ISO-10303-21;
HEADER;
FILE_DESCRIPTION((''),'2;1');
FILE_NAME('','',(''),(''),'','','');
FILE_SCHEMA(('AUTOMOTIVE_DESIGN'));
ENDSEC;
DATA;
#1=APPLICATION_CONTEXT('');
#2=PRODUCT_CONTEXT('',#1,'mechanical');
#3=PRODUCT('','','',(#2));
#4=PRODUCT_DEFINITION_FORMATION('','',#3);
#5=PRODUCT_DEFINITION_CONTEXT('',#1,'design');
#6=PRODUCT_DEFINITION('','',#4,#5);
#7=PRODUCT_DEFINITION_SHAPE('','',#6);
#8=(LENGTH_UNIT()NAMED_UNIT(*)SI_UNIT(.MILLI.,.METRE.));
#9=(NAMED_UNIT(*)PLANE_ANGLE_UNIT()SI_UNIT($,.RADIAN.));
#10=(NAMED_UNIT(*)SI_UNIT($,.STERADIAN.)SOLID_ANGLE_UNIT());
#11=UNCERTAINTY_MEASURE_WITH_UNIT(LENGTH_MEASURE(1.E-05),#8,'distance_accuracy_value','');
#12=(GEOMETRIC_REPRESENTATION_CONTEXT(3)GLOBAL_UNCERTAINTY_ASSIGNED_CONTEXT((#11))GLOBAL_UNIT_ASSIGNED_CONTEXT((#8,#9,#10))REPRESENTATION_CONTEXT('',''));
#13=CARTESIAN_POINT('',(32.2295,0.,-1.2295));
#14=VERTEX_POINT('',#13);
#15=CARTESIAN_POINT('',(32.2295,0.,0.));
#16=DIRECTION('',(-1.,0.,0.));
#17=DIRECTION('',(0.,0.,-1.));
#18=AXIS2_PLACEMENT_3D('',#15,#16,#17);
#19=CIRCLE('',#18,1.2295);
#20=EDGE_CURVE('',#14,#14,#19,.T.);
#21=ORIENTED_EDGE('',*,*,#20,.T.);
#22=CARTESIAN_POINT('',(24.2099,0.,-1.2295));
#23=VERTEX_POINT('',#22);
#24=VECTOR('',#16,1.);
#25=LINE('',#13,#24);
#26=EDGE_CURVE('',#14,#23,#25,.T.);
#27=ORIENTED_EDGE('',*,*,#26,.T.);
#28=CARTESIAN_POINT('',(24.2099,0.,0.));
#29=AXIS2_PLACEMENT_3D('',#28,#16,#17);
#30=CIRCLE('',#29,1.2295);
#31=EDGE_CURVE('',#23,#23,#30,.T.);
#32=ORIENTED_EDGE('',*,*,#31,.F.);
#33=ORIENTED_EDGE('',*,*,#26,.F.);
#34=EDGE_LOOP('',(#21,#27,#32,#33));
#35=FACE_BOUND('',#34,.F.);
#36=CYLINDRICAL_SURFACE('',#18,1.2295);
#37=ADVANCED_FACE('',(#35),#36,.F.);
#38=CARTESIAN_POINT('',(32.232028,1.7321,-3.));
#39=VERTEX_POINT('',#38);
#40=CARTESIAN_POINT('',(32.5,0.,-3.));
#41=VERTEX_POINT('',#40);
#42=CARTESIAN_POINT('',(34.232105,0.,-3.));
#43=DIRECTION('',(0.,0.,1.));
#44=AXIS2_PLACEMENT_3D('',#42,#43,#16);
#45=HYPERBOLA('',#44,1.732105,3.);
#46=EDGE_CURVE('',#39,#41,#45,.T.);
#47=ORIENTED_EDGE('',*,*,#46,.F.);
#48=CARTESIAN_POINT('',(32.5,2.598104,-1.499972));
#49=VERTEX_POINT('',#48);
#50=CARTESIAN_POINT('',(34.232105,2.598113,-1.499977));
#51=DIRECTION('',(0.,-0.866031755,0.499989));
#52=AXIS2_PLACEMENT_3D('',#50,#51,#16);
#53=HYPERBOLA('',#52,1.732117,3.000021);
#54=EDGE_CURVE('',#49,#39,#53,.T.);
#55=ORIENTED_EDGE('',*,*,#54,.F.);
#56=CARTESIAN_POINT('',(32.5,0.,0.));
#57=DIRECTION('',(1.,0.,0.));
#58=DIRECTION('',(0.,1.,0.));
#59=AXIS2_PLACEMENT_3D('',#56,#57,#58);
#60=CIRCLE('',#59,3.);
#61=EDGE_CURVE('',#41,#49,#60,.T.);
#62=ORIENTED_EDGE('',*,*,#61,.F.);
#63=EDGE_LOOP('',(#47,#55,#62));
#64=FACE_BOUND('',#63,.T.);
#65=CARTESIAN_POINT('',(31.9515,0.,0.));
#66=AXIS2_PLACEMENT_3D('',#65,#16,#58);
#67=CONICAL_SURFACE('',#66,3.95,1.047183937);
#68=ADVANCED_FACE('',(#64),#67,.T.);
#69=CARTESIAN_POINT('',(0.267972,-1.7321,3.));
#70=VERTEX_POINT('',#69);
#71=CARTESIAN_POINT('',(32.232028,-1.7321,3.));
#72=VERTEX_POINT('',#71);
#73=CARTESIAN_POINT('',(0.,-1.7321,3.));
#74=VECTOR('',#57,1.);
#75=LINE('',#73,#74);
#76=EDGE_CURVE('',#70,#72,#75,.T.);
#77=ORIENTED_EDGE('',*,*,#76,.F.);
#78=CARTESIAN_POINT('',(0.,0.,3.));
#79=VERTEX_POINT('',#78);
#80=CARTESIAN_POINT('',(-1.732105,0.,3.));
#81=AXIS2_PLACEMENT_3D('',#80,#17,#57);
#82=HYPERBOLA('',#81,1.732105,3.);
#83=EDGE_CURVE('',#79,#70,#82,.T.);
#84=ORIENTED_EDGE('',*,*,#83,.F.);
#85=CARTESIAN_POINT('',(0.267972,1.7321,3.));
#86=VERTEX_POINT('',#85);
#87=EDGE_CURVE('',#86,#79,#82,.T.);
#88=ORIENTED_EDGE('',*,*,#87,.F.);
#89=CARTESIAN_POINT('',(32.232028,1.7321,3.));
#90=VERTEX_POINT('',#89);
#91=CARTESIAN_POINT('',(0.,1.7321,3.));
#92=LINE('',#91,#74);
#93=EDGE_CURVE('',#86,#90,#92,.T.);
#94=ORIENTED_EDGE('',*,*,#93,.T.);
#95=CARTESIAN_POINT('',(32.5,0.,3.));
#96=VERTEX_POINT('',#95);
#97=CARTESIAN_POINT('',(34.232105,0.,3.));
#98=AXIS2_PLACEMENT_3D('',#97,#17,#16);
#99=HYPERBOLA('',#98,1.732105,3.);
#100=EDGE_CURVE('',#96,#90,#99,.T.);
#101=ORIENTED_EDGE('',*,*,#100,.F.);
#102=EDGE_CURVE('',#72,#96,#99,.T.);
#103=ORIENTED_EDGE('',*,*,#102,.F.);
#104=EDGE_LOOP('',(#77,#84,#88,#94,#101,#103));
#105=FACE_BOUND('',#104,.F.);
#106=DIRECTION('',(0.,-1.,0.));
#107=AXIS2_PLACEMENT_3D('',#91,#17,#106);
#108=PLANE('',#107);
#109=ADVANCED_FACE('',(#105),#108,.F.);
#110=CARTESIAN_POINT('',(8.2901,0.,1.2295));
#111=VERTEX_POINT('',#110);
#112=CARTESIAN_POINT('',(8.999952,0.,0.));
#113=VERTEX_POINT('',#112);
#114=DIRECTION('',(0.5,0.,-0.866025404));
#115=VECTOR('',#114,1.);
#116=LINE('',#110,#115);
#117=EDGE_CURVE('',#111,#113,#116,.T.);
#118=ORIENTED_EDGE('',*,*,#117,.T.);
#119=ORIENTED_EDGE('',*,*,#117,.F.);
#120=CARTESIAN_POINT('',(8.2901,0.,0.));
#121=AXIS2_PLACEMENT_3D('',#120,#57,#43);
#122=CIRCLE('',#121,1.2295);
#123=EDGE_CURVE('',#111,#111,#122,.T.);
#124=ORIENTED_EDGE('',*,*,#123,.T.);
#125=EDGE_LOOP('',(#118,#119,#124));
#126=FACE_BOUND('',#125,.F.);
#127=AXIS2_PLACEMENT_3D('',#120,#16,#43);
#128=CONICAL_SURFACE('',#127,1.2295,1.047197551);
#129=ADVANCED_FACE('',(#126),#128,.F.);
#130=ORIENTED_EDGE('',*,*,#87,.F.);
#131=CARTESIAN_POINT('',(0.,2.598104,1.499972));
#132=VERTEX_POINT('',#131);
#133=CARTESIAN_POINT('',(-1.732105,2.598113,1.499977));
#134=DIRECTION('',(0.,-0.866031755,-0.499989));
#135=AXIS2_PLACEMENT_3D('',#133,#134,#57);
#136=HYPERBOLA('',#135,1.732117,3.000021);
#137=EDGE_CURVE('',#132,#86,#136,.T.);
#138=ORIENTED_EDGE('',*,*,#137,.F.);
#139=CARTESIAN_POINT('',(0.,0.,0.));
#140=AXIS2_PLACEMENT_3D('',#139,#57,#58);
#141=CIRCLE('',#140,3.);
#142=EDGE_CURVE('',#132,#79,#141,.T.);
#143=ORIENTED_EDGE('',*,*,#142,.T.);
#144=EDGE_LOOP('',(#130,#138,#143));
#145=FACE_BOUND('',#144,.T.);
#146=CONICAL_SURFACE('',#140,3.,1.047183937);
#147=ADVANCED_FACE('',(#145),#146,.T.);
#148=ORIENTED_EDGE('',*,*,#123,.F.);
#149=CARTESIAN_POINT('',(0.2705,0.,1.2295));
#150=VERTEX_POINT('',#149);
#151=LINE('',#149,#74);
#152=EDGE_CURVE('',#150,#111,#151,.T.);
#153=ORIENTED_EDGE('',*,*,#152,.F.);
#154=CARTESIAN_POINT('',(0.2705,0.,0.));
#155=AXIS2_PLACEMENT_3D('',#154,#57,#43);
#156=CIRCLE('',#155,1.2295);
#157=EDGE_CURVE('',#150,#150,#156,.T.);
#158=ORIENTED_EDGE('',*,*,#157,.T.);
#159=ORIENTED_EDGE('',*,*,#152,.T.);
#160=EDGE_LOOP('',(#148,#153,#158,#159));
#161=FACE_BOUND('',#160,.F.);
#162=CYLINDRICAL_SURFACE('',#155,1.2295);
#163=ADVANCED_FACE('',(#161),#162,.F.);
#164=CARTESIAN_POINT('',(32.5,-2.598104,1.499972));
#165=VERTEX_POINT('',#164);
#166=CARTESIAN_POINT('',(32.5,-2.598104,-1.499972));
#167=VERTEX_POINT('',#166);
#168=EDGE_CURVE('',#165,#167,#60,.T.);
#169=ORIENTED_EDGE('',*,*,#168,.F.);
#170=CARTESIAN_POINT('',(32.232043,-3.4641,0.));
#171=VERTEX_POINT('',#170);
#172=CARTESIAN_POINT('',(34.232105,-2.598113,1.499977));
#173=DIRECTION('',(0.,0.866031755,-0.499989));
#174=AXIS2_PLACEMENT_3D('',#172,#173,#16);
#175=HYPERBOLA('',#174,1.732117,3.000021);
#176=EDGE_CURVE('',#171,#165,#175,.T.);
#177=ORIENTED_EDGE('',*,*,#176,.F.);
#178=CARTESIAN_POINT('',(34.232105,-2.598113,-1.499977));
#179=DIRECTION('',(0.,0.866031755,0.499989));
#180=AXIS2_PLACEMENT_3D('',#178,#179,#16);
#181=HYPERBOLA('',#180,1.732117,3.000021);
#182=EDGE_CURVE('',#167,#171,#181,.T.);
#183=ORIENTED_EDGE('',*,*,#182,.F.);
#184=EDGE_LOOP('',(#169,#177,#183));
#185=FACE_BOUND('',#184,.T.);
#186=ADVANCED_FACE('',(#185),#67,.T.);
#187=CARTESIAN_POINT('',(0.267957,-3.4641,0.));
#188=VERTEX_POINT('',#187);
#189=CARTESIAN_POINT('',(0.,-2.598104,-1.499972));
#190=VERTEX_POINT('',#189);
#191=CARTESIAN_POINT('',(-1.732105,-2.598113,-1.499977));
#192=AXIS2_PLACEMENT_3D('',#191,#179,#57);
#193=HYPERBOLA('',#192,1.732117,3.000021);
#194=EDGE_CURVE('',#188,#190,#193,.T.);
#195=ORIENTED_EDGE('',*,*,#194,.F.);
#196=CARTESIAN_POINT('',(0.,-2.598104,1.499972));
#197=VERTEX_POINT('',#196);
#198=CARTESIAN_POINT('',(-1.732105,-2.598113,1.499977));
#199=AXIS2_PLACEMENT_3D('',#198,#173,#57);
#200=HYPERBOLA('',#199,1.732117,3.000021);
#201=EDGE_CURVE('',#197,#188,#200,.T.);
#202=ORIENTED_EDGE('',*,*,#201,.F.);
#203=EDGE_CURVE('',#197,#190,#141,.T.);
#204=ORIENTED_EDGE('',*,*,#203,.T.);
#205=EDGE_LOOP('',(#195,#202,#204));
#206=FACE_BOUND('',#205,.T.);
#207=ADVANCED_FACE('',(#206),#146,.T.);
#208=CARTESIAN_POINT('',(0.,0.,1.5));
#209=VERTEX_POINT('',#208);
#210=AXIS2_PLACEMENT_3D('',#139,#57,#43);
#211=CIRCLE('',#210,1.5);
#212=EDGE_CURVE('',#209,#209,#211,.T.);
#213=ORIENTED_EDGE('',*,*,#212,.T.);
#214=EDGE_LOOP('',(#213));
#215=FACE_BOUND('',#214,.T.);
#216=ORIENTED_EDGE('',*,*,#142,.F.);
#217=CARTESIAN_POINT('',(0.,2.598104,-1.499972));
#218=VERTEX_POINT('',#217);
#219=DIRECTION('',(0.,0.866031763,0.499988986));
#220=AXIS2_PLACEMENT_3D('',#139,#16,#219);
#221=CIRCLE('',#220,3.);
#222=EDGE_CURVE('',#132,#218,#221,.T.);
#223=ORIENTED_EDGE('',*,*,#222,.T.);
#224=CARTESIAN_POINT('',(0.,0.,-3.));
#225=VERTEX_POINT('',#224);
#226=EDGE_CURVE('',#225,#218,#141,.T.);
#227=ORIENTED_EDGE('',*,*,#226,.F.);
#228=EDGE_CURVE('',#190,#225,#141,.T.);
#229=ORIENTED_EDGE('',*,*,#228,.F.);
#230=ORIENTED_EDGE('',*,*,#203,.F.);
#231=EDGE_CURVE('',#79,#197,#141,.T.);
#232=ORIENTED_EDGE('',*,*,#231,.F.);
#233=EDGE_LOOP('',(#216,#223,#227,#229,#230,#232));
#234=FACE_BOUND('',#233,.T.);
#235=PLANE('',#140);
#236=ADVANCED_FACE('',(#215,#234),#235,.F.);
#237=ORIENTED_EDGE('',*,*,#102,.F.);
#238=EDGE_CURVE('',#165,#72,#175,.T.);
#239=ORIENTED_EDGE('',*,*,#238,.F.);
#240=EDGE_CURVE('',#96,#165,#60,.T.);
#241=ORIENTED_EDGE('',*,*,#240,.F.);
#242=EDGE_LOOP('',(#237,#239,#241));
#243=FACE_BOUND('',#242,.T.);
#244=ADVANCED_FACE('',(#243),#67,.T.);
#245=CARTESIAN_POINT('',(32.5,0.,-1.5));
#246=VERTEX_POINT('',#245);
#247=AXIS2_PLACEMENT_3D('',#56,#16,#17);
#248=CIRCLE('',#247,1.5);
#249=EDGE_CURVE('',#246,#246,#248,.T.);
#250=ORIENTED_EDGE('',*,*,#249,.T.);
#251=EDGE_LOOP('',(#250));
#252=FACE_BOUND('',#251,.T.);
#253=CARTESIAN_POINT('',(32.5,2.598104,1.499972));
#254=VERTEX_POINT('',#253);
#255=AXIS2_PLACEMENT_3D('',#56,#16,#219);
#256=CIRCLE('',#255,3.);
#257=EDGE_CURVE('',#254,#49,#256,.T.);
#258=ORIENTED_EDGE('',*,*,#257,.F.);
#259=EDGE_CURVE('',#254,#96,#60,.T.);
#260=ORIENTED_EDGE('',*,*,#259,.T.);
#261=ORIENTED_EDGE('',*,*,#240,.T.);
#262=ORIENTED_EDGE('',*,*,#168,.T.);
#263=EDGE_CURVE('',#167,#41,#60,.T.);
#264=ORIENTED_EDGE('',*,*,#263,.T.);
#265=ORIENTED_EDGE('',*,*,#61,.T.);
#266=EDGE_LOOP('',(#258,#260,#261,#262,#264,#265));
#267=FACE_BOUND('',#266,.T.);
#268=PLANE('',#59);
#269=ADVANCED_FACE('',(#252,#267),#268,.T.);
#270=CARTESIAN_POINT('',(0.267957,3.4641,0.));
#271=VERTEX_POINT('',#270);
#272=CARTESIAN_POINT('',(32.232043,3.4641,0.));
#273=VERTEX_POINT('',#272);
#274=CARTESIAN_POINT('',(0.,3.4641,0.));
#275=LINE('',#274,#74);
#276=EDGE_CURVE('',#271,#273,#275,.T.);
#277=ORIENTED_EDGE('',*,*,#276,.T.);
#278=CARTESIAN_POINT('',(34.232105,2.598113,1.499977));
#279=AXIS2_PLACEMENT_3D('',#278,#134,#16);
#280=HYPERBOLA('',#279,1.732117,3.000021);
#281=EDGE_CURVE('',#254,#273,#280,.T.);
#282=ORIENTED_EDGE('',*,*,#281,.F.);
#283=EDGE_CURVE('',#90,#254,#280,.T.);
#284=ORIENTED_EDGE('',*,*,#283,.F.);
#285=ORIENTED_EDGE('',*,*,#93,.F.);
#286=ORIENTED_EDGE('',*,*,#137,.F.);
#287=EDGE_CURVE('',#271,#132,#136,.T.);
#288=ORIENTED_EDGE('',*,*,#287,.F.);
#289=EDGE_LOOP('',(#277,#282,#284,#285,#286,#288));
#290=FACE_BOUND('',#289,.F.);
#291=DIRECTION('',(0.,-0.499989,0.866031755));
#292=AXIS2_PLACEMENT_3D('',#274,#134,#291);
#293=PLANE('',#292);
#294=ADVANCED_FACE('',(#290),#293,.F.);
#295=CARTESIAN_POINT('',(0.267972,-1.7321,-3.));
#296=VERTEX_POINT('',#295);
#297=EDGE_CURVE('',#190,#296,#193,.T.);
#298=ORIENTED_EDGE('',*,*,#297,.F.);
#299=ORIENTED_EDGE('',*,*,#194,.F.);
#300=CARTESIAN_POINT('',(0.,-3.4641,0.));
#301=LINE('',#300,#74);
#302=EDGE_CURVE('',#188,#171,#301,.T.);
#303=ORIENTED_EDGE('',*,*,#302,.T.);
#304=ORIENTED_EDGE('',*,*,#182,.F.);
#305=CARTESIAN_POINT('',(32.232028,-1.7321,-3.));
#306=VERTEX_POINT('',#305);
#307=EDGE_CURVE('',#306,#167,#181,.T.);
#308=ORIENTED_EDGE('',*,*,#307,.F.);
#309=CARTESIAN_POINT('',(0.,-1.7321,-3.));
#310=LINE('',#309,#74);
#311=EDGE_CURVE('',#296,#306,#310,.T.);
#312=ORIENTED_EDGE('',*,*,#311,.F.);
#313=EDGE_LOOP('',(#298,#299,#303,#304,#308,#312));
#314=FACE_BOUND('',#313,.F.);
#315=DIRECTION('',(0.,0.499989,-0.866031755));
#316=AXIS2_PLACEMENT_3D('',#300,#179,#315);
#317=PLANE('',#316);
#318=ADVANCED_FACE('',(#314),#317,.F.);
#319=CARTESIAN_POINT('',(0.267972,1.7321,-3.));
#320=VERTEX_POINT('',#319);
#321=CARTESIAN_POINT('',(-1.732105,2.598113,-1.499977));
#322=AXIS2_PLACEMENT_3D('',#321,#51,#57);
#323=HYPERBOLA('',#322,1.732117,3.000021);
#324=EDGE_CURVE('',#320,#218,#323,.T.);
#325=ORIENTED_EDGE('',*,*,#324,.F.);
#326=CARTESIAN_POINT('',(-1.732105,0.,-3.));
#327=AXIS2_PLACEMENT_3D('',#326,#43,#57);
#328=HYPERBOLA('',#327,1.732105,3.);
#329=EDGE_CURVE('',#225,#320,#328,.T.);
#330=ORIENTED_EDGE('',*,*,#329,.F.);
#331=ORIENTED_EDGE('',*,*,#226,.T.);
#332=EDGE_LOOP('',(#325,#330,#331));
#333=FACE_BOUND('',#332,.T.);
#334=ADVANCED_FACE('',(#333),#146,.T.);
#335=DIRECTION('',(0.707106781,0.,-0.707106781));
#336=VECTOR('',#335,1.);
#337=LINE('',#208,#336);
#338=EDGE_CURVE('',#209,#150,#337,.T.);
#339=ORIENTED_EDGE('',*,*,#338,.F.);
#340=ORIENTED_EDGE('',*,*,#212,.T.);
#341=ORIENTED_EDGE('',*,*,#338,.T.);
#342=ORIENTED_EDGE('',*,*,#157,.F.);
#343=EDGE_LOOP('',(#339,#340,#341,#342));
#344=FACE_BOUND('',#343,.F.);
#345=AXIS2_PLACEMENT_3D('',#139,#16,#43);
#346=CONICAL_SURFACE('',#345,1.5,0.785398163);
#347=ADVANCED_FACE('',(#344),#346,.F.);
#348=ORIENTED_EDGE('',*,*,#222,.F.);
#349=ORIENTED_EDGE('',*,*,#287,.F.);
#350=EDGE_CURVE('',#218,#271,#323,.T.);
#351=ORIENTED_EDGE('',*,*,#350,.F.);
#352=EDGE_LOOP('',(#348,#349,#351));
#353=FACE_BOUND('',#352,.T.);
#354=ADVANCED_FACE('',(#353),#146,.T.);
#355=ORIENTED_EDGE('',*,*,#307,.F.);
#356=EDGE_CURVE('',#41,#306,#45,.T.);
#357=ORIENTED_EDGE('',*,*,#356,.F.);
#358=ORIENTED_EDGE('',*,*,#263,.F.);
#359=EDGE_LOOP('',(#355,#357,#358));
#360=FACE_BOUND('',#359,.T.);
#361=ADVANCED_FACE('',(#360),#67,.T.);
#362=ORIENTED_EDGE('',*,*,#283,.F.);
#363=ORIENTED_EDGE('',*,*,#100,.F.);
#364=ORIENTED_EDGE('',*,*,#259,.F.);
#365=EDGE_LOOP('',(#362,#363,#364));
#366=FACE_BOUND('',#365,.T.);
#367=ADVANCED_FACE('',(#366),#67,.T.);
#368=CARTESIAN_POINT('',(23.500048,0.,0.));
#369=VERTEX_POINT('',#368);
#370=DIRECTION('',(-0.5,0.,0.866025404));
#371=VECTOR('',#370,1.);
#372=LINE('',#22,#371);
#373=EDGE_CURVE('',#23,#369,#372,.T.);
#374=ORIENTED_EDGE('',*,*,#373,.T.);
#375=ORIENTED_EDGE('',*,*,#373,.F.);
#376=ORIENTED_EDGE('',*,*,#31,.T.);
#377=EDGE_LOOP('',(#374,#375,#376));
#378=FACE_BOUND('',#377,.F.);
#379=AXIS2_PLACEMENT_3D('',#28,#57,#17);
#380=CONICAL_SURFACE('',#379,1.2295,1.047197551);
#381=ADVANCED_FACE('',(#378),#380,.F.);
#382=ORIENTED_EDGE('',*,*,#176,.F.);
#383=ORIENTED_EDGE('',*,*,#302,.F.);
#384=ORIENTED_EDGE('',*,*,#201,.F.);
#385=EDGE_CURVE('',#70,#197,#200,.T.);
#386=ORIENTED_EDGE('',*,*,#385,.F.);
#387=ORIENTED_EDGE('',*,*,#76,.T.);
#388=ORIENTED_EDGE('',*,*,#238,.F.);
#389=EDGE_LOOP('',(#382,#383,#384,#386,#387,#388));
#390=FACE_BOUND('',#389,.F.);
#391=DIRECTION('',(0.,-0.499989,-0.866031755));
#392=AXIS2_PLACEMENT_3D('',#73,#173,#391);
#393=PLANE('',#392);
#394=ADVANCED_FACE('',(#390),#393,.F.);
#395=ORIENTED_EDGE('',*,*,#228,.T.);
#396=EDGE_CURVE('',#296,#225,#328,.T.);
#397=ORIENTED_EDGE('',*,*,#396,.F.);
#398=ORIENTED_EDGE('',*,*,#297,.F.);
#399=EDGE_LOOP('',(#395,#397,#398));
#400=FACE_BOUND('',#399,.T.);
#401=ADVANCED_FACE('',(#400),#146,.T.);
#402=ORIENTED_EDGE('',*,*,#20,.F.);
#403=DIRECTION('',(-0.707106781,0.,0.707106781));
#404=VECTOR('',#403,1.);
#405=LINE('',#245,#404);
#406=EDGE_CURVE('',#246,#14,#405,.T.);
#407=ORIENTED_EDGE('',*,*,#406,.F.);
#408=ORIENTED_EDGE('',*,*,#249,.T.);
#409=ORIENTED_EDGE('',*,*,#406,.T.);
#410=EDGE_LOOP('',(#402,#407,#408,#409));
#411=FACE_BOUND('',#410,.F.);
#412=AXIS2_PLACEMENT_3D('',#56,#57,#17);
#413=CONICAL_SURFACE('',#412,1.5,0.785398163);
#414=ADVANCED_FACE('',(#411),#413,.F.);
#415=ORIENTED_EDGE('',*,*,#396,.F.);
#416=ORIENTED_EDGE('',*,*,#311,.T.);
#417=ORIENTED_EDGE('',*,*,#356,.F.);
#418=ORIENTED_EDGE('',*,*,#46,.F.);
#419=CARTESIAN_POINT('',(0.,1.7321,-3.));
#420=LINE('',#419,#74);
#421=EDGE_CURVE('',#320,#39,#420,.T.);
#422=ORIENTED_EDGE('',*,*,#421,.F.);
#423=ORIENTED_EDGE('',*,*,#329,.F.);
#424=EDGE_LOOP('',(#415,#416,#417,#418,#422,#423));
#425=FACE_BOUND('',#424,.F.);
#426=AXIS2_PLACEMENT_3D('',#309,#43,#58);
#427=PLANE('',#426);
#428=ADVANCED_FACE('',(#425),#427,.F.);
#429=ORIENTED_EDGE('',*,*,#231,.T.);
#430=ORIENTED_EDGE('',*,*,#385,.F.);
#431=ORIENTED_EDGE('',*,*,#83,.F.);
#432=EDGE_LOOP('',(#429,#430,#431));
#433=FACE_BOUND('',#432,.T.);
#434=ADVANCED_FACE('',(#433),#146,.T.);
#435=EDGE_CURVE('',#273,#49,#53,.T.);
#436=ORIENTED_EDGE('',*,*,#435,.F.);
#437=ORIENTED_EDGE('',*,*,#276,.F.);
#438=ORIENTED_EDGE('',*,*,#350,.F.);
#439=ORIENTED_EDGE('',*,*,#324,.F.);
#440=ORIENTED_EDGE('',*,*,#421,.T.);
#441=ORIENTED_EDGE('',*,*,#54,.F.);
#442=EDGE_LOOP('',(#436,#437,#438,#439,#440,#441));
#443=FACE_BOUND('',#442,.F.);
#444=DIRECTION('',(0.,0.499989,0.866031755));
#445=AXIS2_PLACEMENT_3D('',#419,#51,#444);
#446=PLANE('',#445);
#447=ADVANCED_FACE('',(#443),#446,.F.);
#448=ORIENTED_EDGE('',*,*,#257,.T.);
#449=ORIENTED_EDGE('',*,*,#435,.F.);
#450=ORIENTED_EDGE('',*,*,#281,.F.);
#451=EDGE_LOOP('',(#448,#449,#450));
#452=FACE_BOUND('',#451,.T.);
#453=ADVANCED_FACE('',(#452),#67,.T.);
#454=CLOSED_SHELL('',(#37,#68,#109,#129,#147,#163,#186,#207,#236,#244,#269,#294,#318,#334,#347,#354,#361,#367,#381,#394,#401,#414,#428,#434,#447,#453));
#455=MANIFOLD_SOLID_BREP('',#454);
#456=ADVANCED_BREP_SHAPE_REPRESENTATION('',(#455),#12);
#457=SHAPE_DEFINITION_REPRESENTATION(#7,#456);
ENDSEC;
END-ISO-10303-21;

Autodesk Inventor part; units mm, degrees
sketch "Sketch_1" plane through (0, 0, 0) normal (0, 0, 1) x (1, 0, 0)
  line L0 (32.5, 0) -> (0, 0)
  line L1 (0, 0) -> (0, 3)
  line L2 (0, 3) -> (0.5485, 3.95)
  line L3 (0.5485, 3.95) -> (31.9515, 3.95)
  line L4 (31.9515, 3.95) -> (32.5, 3)
  line L5 (32.5, 3) -> (32.5, 0)
  line L6 (32.5, 0) -> (0, 0)
revolve "Revolution1" add sketch "Sketch_1" angle 360 about axis through (32.5, 0, 0) along (1, 0, 0)
sketch "Sketch_2" plane through (0, 0, 0) normal (1, 0, 0) x (0, 1, 0)
  line L0 (6, 6) -> (-6, 6)
  line L1 (-6, 6) -> (-6, -6)
  line L2 (-6, -6) -> (6, -6)
  line L3 (6, -6) -> (6, 6)
  line L4 (-1.7321, 3) -> (-3.4641, 0)
  line L5 (-3.4641, 0) -> (-1.7321, -3)
  line L6 (-1.7321, -3) -> (1.7321, -3)
  line L7 (1.7321, -3) -> (3.4641, 0)
  line L8 (3.4641, 0) -> (1.7321, 3)
  line L9 (1.7321, 3) -> (-1.7321, 3)
extrude "Extrusion1" cut sketch "Sketch_2" along normal blind 32.5
sketch "Sketch3" plane through (0, 0, 0) normal (-1, 0, 0) x (0, 0, 1)
  point P0 (0, 0)
hole "Hole1" at (0, 0, 0) direction (1, 0, 0) diameter 2.459 depth 8.2901 tip angle 120 countersink diameter 3 countersink angle 90 thread size "M3x0.5" class "6H" standard "ISO Metric profile"
sketch "Sketch4" plane through (32.5, 0, 0) normal (1, 0, 0) x (0, 0, -1)
  point P0 (0, 0)
hole "Hole2" at (32.5, 0, 0) direction (-1, 0, 0) diameter 2.459 depth 8.2901 tip angle 120 countersink diameter 3 countersink angle 90 thread size "M3x0.5" class "6H" standard "ISO Metric profile"
ref_plane "C3_XY" through (32.5, 0, 0) normal (-1, 0, 0) x (0, 0, -1)
ref_plane "C3_YZ" through (32.5, 0, 0) normal (0, 0, -1) x (0, -1, 0)
ref_plane "C3_ZX" through (32.5, 0, 0) normal (0, -1, 0) x (-1, 0, 0)
properties part number "ABLSBF6-32.5-M3-N3" material "Aluminum 2014-T4"
